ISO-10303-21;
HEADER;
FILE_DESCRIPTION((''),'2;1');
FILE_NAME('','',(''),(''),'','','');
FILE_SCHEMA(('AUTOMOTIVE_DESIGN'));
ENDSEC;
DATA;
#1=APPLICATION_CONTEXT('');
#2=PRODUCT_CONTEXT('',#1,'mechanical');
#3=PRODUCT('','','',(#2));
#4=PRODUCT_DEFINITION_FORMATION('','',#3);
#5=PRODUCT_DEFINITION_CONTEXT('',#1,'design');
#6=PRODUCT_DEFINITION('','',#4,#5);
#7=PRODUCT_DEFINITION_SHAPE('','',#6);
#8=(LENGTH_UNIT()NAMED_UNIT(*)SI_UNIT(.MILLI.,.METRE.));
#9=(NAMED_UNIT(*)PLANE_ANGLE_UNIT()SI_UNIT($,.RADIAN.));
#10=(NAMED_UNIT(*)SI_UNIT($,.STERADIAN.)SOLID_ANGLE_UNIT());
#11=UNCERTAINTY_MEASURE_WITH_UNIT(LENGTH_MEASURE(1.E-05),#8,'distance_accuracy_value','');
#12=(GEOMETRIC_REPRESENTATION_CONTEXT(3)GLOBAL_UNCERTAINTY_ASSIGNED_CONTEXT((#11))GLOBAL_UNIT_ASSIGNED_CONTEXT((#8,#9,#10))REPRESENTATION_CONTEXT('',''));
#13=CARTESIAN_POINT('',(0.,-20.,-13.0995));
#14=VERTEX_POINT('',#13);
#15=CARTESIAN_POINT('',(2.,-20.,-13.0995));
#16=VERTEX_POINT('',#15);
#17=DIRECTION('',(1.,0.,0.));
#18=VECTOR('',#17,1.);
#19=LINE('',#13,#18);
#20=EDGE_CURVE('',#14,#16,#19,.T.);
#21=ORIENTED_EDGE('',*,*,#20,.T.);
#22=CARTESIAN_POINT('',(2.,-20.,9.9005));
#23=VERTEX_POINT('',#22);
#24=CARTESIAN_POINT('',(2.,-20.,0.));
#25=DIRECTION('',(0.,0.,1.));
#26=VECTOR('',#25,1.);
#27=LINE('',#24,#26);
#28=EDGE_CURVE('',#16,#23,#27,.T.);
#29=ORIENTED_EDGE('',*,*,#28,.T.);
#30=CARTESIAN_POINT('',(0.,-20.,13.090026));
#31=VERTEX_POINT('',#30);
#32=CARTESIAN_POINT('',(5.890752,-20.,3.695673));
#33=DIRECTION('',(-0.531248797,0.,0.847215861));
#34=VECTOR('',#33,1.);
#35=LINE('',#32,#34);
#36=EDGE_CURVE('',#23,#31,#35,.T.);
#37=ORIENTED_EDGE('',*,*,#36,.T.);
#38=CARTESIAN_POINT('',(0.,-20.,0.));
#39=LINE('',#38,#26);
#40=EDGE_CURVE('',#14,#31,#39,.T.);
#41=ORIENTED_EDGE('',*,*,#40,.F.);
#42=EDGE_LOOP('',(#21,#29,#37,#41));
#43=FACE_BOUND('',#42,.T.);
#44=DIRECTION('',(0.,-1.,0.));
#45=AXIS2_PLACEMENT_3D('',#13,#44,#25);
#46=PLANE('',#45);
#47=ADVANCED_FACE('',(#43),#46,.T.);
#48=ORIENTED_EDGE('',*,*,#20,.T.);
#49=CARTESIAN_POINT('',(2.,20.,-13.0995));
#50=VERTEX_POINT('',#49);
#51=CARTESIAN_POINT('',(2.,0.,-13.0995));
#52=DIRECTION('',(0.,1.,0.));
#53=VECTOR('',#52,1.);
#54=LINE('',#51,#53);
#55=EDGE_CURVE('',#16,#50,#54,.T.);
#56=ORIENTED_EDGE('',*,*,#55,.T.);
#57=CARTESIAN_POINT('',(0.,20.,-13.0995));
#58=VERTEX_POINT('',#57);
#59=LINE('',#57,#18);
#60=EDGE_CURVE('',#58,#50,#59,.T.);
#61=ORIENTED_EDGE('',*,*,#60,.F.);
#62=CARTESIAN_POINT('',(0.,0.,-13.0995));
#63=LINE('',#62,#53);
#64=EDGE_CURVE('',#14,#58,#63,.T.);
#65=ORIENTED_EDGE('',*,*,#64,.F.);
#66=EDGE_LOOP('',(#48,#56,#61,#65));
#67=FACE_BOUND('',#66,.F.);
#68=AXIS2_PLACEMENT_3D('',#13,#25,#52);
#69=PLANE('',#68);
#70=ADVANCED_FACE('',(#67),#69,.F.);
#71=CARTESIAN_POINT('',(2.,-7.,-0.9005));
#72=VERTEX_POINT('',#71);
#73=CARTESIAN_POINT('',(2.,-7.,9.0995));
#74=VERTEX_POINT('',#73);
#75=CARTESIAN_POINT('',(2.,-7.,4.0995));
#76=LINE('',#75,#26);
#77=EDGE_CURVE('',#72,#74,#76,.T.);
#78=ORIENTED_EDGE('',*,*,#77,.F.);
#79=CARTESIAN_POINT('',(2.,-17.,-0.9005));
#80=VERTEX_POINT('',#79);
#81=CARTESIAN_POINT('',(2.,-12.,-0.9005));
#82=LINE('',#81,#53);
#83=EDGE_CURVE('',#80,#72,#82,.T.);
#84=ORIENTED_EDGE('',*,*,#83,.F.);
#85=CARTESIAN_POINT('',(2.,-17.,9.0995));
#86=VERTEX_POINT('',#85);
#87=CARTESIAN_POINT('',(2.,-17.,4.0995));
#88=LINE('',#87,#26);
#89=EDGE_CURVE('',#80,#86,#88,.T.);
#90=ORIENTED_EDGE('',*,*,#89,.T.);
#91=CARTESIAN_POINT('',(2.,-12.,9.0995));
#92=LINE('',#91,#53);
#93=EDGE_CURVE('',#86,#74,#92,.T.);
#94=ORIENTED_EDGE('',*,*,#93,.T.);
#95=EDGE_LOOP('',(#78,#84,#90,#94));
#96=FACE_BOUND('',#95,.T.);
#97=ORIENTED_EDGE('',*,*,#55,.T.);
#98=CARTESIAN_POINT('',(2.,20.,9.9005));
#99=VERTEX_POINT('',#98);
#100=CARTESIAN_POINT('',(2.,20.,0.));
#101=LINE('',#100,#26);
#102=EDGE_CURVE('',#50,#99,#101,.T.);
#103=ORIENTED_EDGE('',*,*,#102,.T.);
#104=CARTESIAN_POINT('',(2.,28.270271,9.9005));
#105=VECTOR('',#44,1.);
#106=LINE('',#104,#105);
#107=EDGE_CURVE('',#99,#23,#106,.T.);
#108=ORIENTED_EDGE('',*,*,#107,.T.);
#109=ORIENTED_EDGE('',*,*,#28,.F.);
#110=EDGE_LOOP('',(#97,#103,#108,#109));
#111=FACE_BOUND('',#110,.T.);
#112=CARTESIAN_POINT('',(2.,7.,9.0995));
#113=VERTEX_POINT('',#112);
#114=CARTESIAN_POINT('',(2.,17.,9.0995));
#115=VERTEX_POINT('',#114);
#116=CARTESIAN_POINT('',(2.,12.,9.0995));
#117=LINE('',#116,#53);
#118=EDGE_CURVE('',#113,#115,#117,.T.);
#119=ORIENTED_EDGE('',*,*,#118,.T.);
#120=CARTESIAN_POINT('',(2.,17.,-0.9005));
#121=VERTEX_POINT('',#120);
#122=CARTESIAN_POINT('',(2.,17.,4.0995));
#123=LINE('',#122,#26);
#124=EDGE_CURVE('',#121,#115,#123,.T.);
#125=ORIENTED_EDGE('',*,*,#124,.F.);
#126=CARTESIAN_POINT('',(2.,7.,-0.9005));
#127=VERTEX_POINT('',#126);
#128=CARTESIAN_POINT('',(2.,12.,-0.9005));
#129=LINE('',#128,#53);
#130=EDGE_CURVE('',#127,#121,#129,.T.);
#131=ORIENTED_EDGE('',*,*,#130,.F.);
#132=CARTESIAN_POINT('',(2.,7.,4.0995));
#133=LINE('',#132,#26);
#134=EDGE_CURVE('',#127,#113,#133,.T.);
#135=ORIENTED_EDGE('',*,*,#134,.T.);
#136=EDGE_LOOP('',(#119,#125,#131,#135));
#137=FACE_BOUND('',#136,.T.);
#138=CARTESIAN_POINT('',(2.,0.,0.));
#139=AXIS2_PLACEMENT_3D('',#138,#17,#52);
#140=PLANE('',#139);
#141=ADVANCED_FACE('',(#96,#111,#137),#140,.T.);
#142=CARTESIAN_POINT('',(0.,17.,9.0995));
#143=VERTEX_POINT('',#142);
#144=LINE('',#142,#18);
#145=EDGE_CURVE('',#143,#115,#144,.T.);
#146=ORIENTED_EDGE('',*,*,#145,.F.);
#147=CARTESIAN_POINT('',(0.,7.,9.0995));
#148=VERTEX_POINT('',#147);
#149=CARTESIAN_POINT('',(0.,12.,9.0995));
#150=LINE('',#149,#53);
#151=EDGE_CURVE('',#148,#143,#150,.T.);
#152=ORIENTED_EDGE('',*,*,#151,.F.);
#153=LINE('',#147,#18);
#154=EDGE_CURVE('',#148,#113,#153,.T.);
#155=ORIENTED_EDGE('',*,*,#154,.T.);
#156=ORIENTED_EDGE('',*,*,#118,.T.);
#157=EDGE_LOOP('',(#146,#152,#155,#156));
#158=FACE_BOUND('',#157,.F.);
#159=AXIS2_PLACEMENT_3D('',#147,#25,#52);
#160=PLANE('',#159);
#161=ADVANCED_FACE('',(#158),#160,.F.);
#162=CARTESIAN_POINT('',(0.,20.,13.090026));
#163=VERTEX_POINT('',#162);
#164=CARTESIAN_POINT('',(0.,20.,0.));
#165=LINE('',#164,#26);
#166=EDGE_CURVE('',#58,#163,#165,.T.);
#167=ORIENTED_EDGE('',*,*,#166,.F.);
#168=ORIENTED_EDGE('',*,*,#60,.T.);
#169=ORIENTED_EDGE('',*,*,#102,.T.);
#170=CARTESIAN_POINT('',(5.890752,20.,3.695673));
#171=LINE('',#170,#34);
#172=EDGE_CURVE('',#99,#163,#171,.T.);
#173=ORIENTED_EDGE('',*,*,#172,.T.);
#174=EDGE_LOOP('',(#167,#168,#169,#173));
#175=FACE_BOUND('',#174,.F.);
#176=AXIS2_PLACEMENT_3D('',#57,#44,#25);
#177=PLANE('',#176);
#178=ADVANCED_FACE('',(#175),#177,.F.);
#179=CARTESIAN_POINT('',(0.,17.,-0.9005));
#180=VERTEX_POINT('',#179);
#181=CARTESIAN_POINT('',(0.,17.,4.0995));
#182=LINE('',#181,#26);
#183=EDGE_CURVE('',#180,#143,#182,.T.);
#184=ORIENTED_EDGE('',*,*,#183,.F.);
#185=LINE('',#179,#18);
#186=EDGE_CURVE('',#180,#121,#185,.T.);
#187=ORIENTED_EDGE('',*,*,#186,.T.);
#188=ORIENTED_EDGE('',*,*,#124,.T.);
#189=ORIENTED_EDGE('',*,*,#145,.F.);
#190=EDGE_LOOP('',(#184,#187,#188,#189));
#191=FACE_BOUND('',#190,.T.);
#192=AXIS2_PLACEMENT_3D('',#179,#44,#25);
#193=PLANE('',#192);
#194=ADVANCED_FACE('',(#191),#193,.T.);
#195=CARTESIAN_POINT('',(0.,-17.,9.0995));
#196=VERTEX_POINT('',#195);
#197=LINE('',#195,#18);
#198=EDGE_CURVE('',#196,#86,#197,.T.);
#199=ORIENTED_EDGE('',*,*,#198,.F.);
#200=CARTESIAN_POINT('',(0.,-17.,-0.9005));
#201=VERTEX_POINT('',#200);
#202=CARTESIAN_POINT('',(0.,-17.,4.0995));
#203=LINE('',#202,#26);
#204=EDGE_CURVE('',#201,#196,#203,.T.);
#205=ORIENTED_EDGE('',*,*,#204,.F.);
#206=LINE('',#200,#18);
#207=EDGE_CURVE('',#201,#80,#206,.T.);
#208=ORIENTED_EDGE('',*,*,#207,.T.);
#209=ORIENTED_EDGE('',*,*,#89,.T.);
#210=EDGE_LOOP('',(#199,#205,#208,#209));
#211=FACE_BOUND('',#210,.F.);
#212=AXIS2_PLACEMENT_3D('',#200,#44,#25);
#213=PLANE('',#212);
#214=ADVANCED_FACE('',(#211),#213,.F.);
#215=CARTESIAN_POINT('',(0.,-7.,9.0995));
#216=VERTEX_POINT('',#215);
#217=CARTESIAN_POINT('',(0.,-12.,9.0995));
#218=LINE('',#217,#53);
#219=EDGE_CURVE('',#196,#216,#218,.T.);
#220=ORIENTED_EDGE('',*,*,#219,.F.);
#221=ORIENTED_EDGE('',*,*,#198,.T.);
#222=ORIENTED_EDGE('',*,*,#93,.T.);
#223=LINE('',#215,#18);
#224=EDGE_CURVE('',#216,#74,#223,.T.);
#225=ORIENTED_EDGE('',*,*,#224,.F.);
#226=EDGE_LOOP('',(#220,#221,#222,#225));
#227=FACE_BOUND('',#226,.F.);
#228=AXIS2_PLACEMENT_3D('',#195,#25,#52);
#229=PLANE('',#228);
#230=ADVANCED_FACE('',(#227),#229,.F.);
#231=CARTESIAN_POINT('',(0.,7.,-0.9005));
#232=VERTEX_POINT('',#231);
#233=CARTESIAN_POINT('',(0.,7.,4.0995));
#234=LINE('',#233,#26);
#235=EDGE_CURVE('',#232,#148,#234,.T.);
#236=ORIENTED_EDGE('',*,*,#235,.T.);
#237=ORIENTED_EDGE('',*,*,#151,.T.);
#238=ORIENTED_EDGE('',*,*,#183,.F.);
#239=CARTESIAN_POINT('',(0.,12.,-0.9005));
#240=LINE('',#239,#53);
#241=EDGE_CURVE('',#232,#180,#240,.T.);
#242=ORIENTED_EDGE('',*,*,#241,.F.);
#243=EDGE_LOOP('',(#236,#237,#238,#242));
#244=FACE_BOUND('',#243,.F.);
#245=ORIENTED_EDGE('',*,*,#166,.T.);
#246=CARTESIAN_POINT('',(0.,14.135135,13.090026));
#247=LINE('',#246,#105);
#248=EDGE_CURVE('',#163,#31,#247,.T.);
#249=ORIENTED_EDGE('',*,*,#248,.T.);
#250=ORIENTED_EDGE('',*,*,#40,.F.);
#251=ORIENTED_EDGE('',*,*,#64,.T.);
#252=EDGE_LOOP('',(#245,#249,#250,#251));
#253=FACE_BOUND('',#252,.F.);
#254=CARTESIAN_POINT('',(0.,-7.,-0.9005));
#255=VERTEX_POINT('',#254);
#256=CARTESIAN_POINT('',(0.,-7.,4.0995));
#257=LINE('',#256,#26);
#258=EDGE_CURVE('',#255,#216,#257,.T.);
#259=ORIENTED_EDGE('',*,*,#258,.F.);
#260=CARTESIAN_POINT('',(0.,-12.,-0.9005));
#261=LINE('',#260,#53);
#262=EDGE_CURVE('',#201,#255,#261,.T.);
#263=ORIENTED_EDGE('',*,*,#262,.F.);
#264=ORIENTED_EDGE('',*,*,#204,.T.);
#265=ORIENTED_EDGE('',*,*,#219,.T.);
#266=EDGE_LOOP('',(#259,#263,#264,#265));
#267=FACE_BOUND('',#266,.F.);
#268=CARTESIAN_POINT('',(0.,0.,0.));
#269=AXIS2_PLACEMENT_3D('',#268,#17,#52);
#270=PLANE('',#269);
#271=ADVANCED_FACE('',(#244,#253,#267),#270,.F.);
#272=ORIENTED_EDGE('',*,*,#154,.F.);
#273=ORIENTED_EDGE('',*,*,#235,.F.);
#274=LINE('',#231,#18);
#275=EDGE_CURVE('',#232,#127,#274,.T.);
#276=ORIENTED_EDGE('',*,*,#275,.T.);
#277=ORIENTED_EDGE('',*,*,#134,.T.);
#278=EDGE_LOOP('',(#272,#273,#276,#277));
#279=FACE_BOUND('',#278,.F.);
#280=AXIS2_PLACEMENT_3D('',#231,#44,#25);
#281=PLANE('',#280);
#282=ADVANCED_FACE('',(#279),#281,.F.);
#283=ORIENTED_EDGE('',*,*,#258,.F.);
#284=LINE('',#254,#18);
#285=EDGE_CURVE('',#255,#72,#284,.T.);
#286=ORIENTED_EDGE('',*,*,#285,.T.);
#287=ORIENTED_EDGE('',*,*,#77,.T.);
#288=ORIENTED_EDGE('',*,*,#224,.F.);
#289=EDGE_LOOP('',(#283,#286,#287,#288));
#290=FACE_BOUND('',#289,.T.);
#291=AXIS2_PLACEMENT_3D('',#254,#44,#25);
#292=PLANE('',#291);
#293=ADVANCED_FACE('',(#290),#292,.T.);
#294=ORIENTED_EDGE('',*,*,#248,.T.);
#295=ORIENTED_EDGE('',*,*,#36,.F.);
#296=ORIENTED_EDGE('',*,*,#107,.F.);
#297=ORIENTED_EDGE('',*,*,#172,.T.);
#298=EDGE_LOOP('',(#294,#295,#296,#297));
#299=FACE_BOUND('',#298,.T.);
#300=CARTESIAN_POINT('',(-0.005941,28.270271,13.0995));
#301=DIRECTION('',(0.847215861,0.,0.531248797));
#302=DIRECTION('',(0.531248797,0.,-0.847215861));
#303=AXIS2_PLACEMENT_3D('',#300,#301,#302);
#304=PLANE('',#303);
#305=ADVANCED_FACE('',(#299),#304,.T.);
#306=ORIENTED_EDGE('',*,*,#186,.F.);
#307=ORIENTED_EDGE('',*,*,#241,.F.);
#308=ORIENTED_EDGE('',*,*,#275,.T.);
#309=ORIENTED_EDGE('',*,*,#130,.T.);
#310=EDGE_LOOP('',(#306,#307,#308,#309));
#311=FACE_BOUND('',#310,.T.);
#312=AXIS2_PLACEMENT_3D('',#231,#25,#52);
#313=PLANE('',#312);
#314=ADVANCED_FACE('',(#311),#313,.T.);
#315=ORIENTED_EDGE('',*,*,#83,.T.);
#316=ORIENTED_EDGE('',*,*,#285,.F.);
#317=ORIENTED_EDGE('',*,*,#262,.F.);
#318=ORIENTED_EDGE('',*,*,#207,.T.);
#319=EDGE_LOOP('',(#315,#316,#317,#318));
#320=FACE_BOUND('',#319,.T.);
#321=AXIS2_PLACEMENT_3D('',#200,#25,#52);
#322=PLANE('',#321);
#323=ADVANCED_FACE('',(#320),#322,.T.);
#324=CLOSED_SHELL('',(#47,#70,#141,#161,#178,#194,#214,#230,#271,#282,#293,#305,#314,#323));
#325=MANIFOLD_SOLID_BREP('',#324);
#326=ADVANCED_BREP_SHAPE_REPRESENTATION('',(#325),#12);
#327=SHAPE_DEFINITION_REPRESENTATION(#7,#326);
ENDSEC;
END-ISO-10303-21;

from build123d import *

# Parameters (mm, degrees)
F0_W        = 40
F0_H        = 26.199
F0_W_2      = 10
F0_H_2      = 10
F1_DEPTH    = 2
F2_T1_DEPTH = 56.5405413216


# Not quite as in the source:
# - a fillet or chamfer that OpenCascade refuses, or shapes differently, is made with other operations: its cross-section is extruded or revolved along the edge and cut away or added


with BuildPart() as f1:
    # F0 (on Right) → F1 (new body)
    with BuildSketch(Plane.YZ):
        Rectangle(F0_W, F0_H)
        with Locations((-12, 4.0995)):
            Rectangle(F0_W_2, F0_H_2, mode=Mode.SUBTRACT)
        with Locations((12, 4.0995)):
            Rectangle(F0_W_2, F0_H_2, mode=Mode.SUBTRACT)
    extrude(amount=F1_DEPTH)

    # F2: chamfer of 3.199 x 2.005940846 on 1 edges, made by hand

    # F2_s2 → F2_t1 (cut)
    with BuildSketch(Plane.XZ.offset(-28.2702706608)):
        Polygon((-0.005940846, 13.0995), (2, 9.9005), (2, 13.0995), align=None)
    extrude(amount=F2_T1_DEPTH, mode=Mode.SUBTRACT)


solid = f1.part
